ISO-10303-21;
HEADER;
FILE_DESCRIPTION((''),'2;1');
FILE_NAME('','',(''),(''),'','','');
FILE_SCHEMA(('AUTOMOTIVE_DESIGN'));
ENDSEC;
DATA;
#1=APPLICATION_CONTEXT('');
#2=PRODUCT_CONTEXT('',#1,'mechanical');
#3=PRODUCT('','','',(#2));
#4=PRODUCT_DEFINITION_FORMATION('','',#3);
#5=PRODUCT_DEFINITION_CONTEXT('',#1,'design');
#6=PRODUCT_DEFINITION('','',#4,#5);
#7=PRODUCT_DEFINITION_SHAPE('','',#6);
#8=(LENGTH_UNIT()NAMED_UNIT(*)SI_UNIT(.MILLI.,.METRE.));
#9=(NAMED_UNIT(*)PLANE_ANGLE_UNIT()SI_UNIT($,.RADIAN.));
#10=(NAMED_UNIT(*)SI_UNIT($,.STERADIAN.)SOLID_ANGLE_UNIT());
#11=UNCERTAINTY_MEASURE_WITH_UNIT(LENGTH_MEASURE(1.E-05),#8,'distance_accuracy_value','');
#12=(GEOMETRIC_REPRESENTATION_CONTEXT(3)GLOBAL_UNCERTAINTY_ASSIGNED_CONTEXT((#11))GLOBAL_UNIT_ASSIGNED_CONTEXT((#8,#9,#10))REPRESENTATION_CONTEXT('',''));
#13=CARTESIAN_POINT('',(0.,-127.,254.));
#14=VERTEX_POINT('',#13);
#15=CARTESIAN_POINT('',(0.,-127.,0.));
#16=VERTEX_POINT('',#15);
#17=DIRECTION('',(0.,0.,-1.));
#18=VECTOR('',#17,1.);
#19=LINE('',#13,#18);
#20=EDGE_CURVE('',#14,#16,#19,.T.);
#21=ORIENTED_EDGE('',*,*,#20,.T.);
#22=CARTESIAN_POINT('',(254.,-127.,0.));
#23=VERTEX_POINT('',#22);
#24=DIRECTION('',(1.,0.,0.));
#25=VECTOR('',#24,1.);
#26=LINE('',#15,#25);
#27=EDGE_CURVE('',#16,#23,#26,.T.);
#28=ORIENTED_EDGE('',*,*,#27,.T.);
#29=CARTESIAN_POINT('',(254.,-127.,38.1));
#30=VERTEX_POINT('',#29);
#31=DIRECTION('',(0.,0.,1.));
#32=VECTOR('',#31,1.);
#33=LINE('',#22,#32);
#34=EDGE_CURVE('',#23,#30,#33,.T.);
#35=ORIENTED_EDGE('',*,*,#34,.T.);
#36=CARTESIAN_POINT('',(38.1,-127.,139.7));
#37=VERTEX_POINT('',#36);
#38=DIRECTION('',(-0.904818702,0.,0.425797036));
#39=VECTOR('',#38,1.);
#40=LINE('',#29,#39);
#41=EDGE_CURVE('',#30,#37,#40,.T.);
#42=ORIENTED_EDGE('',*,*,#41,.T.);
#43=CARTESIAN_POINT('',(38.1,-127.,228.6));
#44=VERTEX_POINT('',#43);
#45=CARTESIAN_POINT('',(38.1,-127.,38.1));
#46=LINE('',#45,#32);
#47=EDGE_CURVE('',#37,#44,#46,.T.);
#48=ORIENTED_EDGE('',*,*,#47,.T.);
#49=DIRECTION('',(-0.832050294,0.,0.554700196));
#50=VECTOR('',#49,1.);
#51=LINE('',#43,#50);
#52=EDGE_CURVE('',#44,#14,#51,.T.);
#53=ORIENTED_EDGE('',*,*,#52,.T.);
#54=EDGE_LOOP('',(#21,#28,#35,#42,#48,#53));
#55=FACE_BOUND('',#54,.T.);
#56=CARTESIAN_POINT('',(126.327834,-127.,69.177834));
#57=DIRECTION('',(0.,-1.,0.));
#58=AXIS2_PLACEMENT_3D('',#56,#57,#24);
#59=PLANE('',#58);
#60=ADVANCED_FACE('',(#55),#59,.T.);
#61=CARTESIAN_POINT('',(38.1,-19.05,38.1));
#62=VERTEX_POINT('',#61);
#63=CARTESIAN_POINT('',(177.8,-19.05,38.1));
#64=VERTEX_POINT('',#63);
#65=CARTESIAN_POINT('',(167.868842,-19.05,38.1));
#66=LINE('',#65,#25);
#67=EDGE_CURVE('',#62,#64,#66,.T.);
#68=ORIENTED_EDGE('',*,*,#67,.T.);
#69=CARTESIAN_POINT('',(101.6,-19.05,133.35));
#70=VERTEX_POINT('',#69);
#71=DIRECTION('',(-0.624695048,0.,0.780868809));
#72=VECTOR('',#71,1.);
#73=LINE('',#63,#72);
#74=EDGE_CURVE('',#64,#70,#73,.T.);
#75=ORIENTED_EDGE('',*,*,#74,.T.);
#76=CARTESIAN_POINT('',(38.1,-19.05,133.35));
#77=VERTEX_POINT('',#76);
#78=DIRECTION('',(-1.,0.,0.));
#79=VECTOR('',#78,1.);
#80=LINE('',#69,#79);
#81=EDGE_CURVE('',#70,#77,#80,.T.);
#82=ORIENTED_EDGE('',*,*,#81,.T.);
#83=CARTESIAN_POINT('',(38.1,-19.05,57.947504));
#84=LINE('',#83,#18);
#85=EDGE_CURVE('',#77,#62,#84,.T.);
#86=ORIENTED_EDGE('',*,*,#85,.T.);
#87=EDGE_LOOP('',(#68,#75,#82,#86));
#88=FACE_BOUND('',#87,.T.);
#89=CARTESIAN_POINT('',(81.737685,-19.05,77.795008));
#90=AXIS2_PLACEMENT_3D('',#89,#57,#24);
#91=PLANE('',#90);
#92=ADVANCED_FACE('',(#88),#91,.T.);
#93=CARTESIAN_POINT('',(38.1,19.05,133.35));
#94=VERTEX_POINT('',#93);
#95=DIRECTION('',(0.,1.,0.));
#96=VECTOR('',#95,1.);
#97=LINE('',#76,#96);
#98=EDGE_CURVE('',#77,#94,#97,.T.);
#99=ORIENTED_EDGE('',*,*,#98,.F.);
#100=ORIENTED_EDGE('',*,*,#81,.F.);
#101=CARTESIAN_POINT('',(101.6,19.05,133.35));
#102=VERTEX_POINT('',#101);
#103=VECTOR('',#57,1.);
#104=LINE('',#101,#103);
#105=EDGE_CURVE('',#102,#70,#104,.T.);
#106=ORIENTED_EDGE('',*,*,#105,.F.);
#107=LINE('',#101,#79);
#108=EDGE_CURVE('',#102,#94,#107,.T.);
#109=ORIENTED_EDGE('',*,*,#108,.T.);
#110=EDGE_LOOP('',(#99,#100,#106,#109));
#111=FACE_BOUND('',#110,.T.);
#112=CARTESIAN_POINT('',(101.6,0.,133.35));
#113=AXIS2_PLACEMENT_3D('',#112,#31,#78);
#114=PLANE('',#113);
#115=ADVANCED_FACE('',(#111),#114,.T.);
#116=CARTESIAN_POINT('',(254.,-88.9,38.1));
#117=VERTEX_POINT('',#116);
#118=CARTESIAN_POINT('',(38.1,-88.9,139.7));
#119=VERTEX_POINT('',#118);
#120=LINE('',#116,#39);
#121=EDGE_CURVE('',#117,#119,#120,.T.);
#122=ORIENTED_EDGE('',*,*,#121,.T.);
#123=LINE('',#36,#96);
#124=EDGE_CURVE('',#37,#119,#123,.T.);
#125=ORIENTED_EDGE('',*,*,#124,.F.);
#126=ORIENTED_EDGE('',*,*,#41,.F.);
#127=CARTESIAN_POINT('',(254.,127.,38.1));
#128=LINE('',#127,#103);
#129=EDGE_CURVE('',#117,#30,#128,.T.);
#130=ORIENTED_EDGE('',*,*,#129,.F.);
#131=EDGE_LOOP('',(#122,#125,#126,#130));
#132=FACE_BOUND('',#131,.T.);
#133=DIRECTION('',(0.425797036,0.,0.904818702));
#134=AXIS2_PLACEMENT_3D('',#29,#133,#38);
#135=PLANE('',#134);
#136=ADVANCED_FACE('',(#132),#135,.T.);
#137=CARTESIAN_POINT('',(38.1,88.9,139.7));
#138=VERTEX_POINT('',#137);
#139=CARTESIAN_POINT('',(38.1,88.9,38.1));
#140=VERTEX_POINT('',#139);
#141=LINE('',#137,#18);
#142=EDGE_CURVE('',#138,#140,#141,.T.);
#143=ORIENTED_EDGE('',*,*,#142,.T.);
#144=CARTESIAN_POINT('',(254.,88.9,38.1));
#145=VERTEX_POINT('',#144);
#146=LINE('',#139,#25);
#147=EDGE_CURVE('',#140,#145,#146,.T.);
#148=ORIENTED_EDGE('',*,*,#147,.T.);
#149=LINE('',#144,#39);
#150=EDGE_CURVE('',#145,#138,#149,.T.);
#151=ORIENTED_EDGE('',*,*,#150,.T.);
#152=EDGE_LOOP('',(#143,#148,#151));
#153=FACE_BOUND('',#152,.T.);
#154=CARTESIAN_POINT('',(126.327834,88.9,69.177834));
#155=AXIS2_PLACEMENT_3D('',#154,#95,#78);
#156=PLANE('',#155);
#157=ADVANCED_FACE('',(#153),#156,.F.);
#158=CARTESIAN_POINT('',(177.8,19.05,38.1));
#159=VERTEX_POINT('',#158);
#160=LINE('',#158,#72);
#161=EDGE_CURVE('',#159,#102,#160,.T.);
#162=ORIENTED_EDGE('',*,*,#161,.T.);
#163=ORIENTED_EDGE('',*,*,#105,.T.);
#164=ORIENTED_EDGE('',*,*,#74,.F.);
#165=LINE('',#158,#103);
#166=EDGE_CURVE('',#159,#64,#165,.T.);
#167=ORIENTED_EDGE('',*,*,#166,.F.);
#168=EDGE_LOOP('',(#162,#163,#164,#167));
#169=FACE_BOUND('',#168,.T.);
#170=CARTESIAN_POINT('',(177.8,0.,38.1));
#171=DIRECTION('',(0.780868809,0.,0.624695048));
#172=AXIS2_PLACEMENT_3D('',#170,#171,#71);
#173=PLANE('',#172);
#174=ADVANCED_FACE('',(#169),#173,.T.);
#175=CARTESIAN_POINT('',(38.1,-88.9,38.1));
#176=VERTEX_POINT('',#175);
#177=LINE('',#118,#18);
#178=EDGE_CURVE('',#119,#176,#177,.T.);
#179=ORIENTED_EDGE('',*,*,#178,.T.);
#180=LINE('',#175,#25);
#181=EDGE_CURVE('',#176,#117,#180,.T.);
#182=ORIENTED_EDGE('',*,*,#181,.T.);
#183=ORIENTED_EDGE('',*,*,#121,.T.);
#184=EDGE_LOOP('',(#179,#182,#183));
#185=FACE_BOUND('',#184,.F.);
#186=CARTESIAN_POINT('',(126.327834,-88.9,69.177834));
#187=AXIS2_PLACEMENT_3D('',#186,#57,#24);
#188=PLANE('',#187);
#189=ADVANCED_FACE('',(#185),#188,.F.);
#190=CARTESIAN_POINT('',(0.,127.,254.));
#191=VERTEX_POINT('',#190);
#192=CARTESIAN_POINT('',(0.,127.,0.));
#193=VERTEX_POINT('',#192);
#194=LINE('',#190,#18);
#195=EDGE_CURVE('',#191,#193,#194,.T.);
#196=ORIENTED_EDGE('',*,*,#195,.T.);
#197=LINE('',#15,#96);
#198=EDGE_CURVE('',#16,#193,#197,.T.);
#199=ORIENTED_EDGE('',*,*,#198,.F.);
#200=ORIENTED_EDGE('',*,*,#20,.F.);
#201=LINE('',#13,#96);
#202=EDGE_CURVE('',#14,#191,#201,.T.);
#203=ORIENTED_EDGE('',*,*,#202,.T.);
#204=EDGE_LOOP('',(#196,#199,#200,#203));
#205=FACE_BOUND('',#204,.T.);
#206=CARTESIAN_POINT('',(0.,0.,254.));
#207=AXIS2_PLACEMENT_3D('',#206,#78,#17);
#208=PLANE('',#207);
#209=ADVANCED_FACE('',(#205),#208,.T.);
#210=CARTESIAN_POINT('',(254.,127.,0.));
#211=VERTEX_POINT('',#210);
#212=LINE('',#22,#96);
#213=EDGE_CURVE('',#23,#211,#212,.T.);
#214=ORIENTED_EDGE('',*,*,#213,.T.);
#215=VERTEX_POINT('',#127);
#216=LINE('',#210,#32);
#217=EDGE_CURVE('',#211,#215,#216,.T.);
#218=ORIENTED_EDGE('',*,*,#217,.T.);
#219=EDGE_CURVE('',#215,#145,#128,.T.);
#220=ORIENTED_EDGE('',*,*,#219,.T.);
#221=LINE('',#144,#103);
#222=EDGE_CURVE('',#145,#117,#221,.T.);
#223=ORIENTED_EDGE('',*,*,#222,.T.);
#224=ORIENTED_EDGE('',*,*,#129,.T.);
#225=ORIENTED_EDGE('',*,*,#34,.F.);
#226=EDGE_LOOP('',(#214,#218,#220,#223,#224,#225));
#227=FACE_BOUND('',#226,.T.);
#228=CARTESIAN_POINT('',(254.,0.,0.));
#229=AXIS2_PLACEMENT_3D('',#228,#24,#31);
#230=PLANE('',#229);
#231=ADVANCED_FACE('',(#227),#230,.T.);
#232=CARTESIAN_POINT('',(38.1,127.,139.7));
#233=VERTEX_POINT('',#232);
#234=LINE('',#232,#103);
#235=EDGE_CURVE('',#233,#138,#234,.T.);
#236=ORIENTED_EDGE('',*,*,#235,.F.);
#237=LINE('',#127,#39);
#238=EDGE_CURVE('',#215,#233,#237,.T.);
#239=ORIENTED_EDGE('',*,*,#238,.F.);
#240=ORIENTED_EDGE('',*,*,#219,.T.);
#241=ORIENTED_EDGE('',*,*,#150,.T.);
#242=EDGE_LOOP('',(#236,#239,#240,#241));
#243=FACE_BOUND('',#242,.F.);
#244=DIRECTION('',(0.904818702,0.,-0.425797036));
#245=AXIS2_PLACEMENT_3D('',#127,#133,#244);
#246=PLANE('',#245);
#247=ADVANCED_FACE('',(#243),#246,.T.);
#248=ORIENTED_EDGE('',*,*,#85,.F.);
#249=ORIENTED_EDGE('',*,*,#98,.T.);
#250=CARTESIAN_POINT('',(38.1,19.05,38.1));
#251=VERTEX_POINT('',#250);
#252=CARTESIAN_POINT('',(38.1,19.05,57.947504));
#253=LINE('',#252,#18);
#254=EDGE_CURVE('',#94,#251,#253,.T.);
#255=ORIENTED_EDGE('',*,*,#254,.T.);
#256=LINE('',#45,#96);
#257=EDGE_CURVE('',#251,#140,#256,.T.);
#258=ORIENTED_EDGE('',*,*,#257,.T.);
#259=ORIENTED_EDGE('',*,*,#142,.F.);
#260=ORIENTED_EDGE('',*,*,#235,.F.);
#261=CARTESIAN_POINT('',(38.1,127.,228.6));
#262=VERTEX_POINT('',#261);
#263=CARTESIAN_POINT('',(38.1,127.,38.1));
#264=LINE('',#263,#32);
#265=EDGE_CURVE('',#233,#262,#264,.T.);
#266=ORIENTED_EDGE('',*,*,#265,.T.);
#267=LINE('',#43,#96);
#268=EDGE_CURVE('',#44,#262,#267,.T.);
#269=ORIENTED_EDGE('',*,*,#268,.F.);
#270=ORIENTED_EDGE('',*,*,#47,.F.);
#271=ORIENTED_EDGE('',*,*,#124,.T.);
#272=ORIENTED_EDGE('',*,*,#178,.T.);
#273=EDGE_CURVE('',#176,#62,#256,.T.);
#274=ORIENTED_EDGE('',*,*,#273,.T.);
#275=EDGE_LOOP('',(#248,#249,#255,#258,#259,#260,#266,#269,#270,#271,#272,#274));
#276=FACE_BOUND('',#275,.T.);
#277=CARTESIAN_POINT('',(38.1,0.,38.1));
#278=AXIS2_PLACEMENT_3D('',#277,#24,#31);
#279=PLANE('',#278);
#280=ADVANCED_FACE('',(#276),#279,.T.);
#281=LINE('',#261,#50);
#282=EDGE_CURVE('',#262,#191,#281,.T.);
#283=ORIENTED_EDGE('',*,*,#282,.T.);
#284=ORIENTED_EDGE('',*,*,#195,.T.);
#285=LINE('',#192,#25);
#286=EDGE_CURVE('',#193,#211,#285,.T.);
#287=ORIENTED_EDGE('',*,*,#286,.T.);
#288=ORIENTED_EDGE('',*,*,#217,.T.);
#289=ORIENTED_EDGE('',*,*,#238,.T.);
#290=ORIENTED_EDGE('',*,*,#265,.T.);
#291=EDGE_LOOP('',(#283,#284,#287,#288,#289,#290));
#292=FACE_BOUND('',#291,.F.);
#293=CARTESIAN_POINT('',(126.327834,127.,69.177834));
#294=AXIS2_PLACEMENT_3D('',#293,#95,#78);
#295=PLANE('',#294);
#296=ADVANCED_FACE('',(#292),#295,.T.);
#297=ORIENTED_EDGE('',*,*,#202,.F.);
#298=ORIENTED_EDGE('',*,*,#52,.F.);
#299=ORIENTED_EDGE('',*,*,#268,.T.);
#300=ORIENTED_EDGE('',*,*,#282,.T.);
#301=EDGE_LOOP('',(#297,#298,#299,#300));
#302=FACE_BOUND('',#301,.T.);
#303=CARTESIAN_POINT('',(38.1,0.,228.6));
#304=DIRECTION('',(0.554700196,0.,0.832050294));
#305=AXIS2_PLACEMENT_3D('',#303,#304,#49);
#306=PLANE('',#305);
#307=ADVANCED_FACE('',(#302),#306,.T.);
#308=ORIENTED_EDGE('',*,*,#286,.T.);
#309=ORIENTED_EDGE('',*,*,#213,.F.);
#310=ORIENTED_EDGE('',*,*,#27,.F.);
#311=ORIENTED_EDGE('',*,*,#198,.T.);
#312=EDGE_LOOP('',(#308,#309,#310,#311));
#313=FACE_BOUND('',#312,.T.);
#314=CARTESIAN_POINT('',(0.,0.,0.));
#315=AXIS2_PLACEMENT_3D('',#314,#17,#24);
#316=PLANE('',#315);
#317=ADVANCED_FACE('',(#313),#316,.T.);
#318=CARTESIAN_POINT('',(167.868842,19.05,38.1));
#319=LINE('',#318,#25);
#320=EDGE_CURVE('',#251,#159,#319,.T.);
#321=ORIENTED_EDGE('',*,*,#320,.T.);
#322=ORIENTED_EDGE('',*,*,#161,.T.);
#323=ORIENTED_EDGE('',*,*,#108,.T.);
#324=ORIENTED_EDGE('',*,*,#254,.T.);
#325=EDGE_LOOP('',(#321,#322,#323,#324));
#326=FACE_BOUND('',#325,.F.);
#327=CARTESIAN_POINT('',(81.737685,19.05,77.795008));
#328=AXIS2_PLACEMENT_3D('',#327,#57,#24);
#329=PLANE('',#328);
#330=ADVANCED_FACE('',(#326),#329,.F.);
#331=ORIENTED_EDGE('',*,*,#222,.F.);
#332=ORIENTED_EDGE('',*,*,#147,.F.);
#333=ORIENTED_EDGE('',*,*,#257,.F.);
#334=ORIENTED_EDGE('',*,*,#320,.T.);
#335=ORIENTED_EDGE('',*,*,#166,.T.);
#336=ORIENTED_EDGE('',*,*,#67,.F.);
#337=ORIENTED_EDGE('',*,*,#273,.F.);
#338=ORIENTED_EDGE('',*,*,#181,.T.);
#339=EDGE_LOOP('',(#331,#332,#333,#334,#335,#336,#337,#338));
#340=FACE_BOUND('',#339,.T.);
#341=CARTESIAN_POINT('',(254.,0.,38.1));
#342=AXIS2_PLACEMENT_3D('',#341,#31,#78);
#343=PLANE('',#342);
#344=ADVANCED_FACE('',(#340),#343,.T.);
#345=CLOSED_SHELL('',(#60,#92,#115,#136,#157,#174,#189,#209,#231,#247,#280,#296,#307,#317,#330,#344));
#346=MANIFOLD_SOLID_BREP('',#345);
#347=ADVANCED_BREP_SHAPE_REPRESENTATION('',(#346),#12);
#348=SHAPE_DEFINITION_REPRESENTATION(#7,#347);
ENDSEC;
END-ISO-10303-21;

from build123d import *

# Parameters (mm, degrees)
F1_DEPTH = 127
F3_DEPTH = 38.1
F4_DEPTH = 19.05


# Not quite as in the source:
# - a pattern or mirror of a feature is missing from the dataset's text; its kind, count and spacing are read off the source's solid


with BuildPart() as f1:
    # F0 (on Front) → F1 (new body, symmetric)
    with BuildSketch(Plane.XZ):
        Polygon((0, 254), (0, 0), (254, 0), (254, 38.1), (177.8, 38.1), (38.1, 38.1), (38.1, 133.35), (38.1, 228.6), align=None)
    extrude(amount=F1_DEPTH, both=True)

    # F2 (on face) → F3 (join)
    with BuildSketch(Plane.XZ.offset(127)):
        Polygon((254, 38.1), (38.1, 139.7), (38.1, 38.1), align=None)
    f3 = extrude(amount=-F3_DEPTH)

    # F3_copies: F3 across plane
    add(f3.mirror(Plane.ZX))

    # F0 (on Front) → F4 (join, symmetric)
    with BuildSketch(Plane.XZ):
        Polygon((0, 254), (0, 0), (254, 0), (254, 38.1), (177.8, 38.1), (38.1, 38.1), (38.1, 133.35), (38.1, 228.6), align=None)
        Polygon((101.6, 133.35), (38.1, 133.35), (38.1, 38.1), (177.8, 38.1), align=None)
    extrude(amount=F4_DEPTH, both=True)


solid = f1.part
